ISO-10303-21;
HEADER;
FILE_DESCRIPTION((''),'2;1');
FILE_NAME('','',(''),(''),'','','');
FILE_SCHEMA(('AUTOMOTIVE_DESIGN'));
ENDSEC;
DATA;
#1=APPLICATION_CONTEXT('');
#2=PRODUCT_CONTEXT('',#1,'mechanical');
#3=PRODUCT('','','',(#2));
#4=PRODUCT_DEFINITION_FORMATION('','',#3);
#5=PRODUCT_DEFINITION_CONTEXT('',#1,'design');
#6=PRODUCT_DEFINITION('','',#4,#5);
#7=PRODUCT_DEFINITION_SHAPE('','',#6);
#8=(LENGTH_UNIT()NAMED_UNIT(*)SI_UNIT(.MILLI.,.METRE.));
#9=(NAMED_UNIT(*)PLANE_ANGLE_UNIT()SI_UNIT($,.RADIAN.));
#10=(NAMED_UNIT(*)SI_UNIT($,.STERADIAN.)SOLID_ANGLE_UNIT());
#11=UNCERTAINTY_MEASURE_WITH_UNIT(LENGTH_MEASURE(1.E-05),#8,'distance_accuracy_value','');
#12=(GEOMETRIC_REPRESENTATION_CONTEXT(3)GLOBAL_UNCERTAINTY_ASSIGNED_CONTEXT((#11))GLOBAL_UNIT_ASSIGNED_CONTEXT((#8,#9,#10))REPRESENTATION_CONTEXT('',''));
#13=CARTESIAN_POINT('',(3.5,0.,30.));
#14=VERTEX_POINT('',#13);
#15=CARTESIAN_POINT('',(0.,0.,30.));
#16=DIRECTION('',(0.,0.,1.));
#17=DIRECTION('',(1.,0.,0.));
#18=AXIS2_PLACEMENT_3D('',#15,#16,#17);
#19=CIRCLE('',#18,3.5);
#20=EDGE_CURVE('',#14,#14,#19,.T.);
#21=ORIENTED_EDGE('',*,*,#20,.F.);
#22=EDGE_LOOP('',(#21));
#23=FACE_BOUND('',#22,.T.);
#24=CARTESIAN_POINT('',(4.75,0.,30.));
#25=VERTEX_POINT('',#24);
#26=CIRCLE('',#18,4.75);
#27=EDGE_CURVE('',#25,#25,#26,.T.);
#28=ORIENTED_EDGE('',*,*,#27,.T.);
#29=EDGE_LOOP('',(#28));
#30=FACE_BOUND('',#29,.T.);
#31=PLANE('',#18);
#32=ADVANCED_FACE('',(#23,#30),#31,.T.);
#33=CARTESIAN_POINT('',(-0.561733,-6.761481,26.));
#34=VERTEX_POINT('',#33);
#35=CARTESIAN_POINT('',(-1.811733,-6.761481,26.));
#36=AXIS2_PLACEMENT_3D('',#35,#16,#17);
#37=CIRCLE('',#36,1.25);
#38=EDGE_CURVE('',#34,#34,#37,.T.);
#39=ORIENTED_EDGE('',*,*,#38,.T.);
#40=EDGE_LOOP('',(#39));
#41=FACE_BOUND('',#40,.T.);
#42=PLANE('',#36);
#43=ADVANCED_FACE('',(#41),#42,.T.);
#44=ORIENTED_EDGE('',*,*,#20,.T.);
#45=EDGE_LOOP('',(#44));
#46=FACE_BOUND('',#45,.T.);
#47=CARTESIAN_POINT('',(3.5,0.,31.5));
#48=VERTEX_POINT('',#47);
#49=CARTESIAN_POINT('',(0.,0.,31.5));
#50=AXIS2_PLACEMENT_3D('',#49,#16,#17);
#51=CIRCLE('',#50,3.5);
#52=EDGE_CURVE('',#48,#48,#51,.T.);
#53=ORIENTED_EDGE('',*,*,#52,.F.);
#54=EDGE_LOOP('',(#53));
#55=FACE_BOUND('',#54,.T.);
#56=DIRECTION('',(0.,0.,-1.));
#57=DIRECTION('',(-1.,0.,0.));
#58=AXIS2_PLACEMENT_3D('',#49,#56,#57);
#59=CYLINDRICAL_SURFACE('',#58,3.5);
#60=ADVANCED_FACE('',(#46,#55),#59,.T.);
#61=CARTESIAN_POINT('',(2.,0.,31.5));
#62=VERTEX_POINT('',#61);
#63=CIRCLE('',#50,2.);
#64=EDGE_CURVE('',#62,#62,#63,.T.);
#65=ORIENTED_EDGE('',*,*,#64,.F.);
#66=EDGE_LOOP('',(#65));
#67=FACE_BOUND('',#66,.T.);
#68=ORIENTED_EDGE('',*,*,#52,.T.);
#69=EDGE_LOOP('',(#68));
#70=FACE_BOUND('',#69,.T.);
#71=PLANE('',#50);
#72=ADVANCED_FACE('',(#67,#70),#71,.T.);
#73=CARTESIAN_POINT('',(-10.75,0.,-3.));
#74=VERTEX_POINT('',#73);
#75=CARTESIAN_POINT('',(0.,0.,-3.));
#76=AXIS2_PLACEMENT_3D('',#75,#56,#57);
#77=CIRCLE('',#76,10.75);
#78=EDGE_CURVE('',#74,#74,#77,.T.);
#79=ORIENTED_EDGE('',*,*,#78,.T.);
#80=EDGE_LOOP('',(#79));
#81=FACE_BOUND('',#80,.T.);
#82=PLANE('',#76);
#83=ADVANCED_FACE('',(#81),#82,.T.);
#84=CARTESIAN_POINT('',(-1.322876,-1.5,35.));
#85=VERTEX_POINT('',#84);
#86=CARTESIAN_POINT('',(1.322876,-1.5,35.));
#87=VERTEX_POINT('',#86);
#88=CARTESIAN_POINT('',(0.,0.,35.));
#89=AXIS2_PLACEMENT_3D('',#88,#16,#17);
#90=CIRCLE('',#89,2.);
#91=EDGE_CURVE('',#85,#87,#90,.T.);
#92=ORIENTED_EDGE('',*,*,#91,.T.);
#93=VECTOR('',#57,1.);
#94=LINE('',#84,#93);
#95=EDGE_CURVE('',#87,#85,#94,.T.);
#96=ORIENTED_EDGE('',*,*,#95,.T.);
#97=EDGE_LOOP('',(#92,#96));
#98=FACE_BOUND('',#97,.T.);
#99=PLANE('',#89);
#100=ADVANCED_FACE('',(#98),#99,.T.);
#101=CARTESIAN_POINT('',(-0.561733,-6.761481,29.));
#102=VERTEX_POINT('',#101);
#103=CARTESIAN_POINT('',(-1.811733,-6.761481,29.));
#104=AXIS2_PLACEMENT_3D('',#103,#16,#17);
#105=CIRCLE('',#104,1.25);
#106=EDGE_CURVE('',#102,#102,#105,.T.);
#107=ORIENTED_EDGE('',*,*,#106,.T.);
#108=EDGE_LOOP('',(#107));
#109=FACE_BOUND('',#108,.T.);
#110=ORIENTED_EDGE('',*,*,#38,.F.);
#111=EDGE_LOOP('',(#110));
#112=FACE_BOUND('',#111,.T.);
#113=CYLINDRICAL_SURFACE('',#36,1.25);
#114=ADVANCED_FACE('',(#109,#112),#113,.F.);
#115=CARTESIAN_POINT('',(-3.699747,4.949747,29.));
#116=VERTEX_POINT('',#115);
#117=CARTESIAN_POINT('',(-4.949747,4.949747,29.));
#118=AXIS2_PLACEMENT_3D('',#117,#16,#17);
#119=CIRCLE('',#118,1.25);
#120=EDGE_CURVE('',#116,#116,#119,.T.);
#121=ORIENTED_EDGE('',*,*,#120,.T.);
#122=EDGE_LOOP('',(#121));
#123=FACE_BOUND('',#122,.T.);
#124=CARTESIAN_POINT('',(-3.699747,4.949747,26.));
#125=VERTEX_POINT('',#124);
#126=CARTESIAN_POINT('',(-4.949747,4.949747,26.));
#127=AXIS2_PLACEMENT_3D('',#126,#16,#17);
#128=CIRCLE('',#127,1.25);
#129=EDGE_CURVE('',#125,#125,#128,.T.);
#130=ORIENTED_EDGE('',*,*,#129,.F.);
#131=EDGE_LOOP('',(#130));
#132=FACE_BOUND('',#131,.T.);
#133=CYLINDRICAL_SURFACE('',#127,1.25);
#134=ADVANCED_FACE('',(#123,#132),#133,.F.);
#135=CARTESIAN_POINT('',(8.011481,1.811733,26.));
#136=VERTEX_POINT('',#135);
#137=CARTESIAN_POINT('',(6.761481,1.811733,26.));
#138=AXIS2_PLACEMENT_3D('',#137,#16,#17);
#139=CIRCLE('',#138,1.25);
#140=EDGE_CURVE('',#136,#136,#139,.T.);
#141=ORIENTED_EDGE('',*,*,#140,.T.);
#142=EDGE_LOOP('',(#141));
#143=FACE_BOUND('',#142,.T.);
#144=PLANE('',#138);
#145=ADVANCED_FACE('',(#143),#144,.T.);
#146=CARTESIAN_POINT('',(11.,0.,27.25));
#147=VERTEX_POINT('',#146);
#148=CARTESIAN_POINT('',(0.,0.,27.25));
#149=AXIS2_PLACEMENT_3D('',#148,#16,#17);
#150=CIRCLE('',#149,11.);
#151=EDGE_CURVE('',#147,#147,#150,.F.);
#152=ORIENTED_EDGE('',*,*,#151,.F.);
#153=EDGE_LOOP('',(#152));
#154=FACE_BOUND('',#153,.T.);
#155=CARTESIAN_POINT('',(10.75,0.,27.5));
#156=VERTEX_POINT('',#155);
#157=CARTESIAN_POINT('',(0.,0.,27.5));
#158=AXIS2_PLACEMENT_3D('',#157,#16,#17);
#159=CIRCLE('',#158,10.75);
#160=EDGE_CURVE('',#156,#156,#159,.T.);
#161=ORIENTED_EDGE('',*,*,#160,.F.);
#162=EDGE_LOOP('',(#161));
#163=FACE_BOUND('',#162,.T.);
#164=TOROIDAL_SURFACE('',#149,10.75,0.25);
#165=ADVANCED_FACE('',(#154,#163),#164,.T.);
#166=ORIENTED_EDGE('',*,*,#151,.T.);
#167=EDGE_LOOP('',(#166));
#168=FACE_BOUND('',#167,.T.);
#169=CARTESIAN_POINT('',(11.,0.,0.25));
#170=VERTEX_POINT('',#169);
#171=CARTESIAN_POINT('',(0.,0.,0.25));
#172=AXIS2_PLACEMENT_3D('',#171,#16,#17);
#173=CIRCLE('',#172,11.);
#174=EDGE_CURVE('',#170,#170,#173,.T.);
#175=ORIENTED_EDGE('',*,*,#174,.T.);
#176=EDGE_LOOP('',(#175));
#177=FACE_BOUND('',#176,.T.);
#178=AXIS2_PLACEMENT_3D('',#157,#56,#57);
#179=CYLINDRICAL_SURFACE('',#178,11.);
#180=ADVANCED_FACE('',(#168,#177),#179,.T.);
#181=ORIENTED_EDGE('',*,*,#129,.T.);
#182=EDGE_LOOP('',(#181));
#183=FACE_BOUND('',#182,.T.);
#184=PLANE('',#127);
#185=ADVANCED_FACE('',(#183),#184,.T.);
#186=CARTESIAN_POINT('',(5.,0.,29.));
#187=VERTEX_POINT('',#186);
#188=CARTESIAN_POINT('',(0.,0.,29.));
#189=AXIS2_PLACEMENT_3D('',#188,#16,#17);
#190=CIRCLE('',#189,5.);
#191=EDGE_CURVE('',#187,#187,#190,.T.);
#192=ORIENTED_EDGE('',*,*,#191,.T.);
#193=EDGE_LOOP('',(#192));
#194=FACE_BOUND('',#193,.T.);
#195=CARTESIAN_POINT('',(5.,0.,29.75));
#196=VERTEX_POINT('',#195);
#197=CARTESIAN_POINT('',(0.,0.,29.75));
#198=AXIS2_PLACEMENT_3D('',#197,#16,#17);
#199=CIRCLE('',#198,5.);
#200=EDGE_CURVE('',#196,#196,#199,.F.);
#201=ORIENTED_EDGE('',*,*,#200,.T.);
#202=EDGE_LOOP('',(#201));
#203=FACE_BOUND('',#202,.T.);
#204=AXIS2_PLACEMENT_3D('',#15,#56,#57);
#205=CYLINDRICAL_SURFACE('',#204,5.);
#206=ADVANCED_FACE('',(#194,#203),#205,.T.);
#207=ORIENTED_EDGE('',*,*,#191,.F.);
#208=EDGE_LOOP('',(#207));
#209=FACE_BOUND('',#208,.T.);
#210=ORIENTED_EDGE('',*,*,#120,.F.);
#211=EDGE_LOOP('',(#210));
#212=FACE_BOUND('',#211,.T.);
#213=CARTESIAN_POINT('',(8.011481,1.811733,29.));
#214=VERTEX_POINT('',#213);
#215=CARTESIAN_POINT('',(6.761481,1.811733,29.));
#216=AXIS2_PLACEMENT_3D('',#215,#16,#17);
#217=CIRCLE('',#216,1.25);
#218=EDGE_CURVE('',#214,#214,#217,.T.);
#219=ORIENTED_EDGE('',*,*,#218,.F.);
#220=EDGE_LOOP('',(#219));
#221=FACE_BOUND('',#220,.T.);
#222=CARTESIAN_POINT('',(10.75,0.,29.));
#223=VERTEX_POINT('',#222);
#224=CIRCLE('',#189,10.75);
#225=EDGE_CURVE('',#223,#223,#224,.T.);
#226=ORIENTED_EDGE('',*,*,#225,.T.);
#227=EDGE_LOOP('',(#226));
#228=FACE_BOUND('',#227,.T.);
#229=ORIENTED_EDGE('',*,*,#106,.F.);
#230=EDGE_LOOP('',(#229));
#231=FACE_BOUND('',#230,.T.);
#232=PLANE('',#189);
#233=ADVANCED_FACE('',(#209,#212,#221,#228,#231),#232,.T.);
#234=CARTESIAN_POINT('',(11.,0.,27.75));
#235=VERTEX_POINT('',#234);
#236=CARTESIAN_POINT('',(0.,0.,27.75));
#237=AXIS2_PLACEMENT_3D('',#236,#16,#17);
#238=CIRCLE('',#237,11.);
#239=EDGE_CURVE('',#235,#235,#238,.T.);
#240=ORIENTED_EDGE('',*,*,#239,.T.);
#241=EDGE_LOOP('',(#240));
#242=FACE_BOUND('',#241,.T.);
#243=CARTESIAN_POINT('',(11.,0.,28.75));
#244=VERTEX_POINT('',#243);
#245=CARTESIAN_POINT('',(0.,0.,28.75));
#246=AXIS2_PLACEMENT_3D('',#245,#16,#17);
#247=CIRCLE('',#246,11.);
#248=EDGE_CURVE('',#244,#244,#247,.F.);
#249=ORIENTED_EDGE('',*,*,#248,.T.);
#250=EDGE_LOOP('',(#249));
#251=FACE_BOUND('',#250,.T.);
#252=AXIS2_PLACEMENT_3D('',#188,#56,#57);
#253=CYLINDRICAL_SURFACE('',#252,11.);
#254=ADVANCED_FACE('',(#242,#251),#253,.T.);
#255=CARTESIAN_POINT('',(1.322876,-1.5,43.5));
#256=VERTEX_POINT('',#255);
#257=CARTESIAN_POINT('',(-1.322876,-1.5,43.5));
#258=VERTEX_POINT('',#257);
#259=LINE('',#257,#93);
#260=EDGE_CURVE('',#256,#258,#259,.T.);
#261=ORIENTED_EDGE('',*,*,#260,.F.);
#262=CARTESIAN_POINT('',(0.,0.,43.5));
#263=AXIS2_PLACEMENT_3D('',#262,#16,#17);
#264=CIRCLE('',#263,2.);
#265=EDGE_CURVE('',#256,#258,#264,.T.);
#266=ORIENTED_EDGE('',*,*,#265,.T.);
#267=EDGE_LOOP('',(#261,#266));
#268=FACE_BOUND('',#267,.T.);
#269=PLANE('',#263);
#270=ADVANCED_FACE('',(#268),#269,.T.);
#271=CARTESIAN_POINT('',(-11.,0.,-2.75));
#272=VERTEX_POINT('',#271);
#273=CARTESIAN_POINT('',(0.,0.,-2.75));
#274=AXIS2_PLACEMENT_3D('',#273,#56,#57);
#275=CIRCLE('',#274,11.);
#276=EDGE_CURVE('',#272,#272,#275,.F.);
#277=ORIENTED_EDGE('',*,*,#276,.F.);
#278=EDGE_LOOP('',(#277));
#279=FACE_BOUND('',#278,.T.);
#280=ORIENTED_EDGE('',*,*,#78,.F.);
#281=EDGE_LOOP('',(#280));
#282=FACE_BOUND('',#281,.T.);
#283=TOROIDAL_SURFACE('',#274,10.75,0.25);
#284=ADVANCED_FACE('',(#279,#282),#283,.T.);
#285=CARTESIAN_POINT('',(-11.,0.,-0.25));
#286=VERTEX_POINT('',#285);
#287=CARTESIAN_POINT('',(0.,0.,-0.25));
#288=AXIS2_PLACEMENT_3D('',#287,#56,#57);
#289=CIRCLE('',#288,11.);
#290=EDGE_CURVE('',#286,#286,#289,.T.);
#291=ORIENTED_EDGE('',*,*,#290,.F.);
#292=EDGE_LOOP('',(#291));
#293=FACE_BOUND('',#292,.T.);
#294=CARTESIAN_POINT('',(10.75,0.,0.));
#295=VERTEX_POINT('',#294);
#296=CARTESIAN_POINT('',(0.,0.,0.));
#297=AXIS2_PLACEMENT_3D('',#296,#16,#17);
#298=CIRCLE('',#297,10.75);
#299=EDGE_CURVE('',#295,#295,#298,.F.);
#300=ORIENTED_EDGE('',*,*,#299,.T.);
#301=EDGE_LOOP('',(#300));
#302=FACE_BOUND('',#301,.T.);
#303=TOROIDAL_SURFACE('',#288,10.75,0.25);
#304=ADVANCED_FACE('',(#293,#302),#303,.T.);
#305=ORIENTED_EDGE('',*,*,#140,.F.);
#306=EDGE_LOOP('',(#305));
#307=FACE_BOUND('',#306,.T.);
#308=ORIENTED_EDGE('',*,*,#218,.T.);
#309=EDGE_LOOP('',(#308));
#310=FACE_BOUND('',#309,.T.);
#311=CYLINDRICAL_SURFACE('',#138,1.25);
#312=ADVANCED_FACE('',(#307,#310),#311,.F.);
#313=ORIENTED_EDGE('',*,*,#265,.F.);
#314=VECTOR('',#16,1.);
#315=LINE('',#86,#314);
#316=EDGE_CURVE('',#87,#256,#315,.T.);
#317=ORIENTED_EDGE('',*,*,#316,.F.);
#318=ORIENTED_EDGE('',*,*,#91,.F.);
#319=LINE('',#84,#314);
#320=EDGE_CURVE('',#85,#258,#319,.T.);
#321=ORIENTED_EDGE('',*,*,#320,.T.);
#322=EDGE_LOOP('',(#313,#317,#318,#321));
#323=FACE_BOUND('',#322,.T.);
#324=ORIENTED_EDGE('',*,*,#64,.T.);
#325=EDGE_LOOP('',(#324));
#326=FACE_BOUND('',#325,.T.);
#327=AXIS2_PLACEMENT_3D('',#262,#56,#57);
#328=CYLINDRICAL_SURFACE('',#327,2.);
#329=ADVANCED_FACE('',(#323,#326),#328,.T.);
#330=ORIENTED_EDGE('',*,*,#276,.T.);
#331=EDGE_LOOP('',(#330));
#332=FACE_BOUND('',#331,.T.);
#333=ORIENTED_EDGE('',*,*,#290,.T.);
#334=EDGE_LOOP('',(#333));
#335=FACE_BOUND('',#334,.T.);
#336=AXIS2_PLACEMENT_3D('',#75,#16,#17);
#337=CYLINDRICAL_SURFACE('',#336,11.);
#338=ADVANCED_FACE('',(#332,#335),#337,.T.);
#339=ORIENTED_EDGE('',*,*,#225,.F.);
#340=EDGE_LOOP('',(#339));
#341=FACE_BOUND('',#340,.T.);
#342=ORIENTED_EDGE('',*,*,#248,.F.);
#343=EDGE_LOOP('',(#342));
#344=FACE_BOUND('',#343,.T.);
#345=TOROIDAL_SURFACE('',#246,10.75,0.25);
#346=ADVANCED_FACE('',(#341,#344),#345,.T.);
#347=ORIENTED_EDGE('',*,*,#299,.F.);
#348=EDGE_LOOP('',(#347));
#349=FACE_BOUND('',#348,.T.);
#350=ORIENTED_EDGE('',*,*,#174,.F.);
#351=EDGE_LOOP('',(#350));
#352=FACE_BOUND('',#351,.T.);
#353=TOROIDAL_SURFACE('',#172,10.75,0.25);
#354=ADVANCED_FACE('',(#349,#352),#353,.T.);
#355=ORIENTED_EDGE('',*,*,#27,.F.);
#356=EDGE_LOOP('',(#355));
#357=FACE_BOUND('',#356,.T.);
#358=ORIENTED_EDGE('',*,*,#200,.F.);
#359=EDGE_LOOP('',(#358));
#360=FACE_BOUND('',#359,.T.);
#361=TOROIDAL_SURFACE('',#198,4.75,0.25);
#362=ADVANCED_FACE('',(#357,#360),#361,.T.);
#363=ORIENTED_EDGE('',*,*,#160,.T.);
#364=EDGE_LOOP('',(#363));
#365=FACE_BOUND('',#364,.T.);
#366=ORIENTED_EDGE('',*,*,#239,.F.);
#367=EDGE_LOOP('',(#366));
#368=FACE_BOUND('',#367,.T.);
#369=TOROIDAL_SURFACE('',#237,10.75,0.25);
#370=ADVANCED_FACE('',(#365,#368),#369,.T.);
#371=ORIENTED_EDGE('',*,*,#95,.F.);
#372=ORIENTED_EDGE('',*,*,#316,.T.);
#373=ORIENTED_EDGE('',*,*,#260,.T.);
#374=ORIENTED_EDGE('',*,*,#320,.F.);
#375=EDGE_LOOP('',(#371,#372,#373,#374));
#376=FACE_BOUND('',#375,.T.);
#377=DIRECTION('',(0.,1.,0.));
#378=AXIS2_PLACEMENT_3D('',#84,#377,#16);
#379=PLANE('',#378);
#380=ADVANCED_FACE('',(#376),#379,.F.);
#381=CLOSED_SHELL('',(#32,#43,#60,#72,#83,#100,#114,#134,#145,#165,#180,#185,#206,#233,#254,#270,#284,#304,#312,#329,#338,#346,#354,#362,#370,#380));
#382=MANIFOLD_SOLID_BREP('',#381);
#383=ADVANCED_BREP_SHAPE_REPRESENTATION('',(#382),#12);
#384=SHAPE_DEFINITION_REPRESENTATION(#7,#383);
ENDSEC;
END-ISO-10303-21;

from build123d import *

# Parameters (mm, degrees)
ESQUISSE1_R             = 11
BOSS_EXTRU_1_DEPTH      = 27.5
CONG_1_R                = 0.25
BOSS_EXTRU_5_START      = 3
ESQUISSE4_R             = 11
BOSS_EXTRU_5_DEPTH      = 3
CONG_2_R                = 0.25
ESQUISSE5_R             = 11
BOSS_EXTRU_6_DEPTH      = 1.5
CONG_3_R                = 0.25
ESQUISSE6_R             = 5
BOSS_EXTRU_7_DEPTH      = 1
CONG_4_R                = 0.25
ESQUISSE7_R             = 3.5
BOSS_EXTRU_8_DEPTH      = 1.5
ESQUISSE8_R             = 2
BOSS_EXTRU_9_DEPTH      = 12
ENL_V_START             = -8.5
ENL_V_MAT_EXTRU_1_DEPTH = 8.5
ESQUISSE10_R            = 1.25
ENL_V_MAT_EXTRU_2_DEPTH = 3


with BuildPart() as part:
    # Esquisse1 → Boss.-Extru.1 (new body)
    with BuildSketch(Plane.XY):
        Circle(ESQUISSE1_R)
    extrude(amount=BOSS_EXTRU_1_DEPTH)

    # Congé1
    cong_1_edges = [part.edges().sort_by_distance(p)[0] for p in [
        (-11, 0, 0),
        (-11, 0, 27.5),
    ]]
    fillet(cong_1_edges, radius=CONG_1_R)

    # Esquisse4 → Boss.-Extru.5 (add)
    with BuildSketch(Plane(origin=(0, 0, 0), x_dir=(-1, 0, 0), z_dir=(0, 0, -1)).offset(BOSS_EXTRU_5_START)):
        with Locations(Location((0, 0, 0), (0, 0, 180))):
            Circle(ESQUISSE4_R)
    extrude(amount=-BOSS_EXTRU_5_DEPTH)

    # Congé2
    cong_2_edges = [part.edges().sort_by_distance(p)[0] for p in [
        (-11, 0, 0),
        (-11, 0, -3),
    ]]
    fillet(cong_2_edges, radius=CONG_2_R - 0.0001)  # a hair under: the kernel refuses the full size

    # Esquisse5 → Boss.-Extru.6 (add)
    with BuildSketch(Plane.XY.offset(27.5)):
        Circle(ESQUISSE5_R)
    extrude(amount=BOSS_EXTRU_6_DEPTH)

    # Congé3
    cong_3_edges = [part.edges().sort_by_distance(p)[0] for p in [
        (-11, 0, 27.5),
        (-11, 0, 29),
    ]]
    fillet(cong_3_edges, radius=CONG_3_R - 0.0001)  # a hair under: the kernel refuses the full size

    # Esquisse6 → Boss.-Extru.7 (add)
    with BuildSketch(Plane.XY.offset(29)):
        Circle(ESQUISSE6_R)
    extrude(amount=BOSS_EXTRU_7_DEPTH)

    # Congé4
    cong_4_edges = [part.edges().sort_by_distance(p)[0] for p in [
        (-5, 0, 30),
    ]]
    fillet(cong_4_edges, radius=CONG_4_R)

    # Esquisse7 → Boss.-Extru.8 (add)
    with BuildSketch(Plane.XY.offset(30)):
        Circle(ESQUISSE7_R)
    extrude(amount=BOSS_EXTRU_8_DEPTH)

    # Esquisse8 → Boss.-Extru.9 (add)
    with BuildSketch(Plane.XY.offset(31.5)):
        Circle(ESQUISSE8_R)
    extrude(amount=BOSS_EXTRU_9_DEPTH)

    # Esquisse9 → Enlèv. mat.-Extru.1 (cut)
    with BuildSketch(Plane.XY.offset(43.5).offset(ENL_V_START)):
        with BuildLine():
            Line((-1.322875656, -1.5), (1.322875656, -1.5))
            ThreePointArc((1.322875656, -1.5), (0, -2), (-1.322875656, -1.5))
        make_face()
    extrude(amount=ENL_V_MAT_EXTRU_1_DEPTH, mode=Mode.SUBTRACT)

    # Esquisse10 → Enlèv. mat.-Extru.2 (cut)
    with BuildSketch(Plane.XY.offset(29)):
        with Locations((6.761480784, 1.811733316)):
            Circle(ESQUISSE10_R)
        with Locations((-1.811733316, -6.761480784)):
            Circle(ESQUISSE10_R)
        with Locations((-4.949747468, 4.949747468)):
            Circle(ESQUISSE10_R)
    extrude(amount=-ENL_V_MAT_EXTRU_2_DEPTH, mode=Mode.SUBTRACT)


solid = part.part
